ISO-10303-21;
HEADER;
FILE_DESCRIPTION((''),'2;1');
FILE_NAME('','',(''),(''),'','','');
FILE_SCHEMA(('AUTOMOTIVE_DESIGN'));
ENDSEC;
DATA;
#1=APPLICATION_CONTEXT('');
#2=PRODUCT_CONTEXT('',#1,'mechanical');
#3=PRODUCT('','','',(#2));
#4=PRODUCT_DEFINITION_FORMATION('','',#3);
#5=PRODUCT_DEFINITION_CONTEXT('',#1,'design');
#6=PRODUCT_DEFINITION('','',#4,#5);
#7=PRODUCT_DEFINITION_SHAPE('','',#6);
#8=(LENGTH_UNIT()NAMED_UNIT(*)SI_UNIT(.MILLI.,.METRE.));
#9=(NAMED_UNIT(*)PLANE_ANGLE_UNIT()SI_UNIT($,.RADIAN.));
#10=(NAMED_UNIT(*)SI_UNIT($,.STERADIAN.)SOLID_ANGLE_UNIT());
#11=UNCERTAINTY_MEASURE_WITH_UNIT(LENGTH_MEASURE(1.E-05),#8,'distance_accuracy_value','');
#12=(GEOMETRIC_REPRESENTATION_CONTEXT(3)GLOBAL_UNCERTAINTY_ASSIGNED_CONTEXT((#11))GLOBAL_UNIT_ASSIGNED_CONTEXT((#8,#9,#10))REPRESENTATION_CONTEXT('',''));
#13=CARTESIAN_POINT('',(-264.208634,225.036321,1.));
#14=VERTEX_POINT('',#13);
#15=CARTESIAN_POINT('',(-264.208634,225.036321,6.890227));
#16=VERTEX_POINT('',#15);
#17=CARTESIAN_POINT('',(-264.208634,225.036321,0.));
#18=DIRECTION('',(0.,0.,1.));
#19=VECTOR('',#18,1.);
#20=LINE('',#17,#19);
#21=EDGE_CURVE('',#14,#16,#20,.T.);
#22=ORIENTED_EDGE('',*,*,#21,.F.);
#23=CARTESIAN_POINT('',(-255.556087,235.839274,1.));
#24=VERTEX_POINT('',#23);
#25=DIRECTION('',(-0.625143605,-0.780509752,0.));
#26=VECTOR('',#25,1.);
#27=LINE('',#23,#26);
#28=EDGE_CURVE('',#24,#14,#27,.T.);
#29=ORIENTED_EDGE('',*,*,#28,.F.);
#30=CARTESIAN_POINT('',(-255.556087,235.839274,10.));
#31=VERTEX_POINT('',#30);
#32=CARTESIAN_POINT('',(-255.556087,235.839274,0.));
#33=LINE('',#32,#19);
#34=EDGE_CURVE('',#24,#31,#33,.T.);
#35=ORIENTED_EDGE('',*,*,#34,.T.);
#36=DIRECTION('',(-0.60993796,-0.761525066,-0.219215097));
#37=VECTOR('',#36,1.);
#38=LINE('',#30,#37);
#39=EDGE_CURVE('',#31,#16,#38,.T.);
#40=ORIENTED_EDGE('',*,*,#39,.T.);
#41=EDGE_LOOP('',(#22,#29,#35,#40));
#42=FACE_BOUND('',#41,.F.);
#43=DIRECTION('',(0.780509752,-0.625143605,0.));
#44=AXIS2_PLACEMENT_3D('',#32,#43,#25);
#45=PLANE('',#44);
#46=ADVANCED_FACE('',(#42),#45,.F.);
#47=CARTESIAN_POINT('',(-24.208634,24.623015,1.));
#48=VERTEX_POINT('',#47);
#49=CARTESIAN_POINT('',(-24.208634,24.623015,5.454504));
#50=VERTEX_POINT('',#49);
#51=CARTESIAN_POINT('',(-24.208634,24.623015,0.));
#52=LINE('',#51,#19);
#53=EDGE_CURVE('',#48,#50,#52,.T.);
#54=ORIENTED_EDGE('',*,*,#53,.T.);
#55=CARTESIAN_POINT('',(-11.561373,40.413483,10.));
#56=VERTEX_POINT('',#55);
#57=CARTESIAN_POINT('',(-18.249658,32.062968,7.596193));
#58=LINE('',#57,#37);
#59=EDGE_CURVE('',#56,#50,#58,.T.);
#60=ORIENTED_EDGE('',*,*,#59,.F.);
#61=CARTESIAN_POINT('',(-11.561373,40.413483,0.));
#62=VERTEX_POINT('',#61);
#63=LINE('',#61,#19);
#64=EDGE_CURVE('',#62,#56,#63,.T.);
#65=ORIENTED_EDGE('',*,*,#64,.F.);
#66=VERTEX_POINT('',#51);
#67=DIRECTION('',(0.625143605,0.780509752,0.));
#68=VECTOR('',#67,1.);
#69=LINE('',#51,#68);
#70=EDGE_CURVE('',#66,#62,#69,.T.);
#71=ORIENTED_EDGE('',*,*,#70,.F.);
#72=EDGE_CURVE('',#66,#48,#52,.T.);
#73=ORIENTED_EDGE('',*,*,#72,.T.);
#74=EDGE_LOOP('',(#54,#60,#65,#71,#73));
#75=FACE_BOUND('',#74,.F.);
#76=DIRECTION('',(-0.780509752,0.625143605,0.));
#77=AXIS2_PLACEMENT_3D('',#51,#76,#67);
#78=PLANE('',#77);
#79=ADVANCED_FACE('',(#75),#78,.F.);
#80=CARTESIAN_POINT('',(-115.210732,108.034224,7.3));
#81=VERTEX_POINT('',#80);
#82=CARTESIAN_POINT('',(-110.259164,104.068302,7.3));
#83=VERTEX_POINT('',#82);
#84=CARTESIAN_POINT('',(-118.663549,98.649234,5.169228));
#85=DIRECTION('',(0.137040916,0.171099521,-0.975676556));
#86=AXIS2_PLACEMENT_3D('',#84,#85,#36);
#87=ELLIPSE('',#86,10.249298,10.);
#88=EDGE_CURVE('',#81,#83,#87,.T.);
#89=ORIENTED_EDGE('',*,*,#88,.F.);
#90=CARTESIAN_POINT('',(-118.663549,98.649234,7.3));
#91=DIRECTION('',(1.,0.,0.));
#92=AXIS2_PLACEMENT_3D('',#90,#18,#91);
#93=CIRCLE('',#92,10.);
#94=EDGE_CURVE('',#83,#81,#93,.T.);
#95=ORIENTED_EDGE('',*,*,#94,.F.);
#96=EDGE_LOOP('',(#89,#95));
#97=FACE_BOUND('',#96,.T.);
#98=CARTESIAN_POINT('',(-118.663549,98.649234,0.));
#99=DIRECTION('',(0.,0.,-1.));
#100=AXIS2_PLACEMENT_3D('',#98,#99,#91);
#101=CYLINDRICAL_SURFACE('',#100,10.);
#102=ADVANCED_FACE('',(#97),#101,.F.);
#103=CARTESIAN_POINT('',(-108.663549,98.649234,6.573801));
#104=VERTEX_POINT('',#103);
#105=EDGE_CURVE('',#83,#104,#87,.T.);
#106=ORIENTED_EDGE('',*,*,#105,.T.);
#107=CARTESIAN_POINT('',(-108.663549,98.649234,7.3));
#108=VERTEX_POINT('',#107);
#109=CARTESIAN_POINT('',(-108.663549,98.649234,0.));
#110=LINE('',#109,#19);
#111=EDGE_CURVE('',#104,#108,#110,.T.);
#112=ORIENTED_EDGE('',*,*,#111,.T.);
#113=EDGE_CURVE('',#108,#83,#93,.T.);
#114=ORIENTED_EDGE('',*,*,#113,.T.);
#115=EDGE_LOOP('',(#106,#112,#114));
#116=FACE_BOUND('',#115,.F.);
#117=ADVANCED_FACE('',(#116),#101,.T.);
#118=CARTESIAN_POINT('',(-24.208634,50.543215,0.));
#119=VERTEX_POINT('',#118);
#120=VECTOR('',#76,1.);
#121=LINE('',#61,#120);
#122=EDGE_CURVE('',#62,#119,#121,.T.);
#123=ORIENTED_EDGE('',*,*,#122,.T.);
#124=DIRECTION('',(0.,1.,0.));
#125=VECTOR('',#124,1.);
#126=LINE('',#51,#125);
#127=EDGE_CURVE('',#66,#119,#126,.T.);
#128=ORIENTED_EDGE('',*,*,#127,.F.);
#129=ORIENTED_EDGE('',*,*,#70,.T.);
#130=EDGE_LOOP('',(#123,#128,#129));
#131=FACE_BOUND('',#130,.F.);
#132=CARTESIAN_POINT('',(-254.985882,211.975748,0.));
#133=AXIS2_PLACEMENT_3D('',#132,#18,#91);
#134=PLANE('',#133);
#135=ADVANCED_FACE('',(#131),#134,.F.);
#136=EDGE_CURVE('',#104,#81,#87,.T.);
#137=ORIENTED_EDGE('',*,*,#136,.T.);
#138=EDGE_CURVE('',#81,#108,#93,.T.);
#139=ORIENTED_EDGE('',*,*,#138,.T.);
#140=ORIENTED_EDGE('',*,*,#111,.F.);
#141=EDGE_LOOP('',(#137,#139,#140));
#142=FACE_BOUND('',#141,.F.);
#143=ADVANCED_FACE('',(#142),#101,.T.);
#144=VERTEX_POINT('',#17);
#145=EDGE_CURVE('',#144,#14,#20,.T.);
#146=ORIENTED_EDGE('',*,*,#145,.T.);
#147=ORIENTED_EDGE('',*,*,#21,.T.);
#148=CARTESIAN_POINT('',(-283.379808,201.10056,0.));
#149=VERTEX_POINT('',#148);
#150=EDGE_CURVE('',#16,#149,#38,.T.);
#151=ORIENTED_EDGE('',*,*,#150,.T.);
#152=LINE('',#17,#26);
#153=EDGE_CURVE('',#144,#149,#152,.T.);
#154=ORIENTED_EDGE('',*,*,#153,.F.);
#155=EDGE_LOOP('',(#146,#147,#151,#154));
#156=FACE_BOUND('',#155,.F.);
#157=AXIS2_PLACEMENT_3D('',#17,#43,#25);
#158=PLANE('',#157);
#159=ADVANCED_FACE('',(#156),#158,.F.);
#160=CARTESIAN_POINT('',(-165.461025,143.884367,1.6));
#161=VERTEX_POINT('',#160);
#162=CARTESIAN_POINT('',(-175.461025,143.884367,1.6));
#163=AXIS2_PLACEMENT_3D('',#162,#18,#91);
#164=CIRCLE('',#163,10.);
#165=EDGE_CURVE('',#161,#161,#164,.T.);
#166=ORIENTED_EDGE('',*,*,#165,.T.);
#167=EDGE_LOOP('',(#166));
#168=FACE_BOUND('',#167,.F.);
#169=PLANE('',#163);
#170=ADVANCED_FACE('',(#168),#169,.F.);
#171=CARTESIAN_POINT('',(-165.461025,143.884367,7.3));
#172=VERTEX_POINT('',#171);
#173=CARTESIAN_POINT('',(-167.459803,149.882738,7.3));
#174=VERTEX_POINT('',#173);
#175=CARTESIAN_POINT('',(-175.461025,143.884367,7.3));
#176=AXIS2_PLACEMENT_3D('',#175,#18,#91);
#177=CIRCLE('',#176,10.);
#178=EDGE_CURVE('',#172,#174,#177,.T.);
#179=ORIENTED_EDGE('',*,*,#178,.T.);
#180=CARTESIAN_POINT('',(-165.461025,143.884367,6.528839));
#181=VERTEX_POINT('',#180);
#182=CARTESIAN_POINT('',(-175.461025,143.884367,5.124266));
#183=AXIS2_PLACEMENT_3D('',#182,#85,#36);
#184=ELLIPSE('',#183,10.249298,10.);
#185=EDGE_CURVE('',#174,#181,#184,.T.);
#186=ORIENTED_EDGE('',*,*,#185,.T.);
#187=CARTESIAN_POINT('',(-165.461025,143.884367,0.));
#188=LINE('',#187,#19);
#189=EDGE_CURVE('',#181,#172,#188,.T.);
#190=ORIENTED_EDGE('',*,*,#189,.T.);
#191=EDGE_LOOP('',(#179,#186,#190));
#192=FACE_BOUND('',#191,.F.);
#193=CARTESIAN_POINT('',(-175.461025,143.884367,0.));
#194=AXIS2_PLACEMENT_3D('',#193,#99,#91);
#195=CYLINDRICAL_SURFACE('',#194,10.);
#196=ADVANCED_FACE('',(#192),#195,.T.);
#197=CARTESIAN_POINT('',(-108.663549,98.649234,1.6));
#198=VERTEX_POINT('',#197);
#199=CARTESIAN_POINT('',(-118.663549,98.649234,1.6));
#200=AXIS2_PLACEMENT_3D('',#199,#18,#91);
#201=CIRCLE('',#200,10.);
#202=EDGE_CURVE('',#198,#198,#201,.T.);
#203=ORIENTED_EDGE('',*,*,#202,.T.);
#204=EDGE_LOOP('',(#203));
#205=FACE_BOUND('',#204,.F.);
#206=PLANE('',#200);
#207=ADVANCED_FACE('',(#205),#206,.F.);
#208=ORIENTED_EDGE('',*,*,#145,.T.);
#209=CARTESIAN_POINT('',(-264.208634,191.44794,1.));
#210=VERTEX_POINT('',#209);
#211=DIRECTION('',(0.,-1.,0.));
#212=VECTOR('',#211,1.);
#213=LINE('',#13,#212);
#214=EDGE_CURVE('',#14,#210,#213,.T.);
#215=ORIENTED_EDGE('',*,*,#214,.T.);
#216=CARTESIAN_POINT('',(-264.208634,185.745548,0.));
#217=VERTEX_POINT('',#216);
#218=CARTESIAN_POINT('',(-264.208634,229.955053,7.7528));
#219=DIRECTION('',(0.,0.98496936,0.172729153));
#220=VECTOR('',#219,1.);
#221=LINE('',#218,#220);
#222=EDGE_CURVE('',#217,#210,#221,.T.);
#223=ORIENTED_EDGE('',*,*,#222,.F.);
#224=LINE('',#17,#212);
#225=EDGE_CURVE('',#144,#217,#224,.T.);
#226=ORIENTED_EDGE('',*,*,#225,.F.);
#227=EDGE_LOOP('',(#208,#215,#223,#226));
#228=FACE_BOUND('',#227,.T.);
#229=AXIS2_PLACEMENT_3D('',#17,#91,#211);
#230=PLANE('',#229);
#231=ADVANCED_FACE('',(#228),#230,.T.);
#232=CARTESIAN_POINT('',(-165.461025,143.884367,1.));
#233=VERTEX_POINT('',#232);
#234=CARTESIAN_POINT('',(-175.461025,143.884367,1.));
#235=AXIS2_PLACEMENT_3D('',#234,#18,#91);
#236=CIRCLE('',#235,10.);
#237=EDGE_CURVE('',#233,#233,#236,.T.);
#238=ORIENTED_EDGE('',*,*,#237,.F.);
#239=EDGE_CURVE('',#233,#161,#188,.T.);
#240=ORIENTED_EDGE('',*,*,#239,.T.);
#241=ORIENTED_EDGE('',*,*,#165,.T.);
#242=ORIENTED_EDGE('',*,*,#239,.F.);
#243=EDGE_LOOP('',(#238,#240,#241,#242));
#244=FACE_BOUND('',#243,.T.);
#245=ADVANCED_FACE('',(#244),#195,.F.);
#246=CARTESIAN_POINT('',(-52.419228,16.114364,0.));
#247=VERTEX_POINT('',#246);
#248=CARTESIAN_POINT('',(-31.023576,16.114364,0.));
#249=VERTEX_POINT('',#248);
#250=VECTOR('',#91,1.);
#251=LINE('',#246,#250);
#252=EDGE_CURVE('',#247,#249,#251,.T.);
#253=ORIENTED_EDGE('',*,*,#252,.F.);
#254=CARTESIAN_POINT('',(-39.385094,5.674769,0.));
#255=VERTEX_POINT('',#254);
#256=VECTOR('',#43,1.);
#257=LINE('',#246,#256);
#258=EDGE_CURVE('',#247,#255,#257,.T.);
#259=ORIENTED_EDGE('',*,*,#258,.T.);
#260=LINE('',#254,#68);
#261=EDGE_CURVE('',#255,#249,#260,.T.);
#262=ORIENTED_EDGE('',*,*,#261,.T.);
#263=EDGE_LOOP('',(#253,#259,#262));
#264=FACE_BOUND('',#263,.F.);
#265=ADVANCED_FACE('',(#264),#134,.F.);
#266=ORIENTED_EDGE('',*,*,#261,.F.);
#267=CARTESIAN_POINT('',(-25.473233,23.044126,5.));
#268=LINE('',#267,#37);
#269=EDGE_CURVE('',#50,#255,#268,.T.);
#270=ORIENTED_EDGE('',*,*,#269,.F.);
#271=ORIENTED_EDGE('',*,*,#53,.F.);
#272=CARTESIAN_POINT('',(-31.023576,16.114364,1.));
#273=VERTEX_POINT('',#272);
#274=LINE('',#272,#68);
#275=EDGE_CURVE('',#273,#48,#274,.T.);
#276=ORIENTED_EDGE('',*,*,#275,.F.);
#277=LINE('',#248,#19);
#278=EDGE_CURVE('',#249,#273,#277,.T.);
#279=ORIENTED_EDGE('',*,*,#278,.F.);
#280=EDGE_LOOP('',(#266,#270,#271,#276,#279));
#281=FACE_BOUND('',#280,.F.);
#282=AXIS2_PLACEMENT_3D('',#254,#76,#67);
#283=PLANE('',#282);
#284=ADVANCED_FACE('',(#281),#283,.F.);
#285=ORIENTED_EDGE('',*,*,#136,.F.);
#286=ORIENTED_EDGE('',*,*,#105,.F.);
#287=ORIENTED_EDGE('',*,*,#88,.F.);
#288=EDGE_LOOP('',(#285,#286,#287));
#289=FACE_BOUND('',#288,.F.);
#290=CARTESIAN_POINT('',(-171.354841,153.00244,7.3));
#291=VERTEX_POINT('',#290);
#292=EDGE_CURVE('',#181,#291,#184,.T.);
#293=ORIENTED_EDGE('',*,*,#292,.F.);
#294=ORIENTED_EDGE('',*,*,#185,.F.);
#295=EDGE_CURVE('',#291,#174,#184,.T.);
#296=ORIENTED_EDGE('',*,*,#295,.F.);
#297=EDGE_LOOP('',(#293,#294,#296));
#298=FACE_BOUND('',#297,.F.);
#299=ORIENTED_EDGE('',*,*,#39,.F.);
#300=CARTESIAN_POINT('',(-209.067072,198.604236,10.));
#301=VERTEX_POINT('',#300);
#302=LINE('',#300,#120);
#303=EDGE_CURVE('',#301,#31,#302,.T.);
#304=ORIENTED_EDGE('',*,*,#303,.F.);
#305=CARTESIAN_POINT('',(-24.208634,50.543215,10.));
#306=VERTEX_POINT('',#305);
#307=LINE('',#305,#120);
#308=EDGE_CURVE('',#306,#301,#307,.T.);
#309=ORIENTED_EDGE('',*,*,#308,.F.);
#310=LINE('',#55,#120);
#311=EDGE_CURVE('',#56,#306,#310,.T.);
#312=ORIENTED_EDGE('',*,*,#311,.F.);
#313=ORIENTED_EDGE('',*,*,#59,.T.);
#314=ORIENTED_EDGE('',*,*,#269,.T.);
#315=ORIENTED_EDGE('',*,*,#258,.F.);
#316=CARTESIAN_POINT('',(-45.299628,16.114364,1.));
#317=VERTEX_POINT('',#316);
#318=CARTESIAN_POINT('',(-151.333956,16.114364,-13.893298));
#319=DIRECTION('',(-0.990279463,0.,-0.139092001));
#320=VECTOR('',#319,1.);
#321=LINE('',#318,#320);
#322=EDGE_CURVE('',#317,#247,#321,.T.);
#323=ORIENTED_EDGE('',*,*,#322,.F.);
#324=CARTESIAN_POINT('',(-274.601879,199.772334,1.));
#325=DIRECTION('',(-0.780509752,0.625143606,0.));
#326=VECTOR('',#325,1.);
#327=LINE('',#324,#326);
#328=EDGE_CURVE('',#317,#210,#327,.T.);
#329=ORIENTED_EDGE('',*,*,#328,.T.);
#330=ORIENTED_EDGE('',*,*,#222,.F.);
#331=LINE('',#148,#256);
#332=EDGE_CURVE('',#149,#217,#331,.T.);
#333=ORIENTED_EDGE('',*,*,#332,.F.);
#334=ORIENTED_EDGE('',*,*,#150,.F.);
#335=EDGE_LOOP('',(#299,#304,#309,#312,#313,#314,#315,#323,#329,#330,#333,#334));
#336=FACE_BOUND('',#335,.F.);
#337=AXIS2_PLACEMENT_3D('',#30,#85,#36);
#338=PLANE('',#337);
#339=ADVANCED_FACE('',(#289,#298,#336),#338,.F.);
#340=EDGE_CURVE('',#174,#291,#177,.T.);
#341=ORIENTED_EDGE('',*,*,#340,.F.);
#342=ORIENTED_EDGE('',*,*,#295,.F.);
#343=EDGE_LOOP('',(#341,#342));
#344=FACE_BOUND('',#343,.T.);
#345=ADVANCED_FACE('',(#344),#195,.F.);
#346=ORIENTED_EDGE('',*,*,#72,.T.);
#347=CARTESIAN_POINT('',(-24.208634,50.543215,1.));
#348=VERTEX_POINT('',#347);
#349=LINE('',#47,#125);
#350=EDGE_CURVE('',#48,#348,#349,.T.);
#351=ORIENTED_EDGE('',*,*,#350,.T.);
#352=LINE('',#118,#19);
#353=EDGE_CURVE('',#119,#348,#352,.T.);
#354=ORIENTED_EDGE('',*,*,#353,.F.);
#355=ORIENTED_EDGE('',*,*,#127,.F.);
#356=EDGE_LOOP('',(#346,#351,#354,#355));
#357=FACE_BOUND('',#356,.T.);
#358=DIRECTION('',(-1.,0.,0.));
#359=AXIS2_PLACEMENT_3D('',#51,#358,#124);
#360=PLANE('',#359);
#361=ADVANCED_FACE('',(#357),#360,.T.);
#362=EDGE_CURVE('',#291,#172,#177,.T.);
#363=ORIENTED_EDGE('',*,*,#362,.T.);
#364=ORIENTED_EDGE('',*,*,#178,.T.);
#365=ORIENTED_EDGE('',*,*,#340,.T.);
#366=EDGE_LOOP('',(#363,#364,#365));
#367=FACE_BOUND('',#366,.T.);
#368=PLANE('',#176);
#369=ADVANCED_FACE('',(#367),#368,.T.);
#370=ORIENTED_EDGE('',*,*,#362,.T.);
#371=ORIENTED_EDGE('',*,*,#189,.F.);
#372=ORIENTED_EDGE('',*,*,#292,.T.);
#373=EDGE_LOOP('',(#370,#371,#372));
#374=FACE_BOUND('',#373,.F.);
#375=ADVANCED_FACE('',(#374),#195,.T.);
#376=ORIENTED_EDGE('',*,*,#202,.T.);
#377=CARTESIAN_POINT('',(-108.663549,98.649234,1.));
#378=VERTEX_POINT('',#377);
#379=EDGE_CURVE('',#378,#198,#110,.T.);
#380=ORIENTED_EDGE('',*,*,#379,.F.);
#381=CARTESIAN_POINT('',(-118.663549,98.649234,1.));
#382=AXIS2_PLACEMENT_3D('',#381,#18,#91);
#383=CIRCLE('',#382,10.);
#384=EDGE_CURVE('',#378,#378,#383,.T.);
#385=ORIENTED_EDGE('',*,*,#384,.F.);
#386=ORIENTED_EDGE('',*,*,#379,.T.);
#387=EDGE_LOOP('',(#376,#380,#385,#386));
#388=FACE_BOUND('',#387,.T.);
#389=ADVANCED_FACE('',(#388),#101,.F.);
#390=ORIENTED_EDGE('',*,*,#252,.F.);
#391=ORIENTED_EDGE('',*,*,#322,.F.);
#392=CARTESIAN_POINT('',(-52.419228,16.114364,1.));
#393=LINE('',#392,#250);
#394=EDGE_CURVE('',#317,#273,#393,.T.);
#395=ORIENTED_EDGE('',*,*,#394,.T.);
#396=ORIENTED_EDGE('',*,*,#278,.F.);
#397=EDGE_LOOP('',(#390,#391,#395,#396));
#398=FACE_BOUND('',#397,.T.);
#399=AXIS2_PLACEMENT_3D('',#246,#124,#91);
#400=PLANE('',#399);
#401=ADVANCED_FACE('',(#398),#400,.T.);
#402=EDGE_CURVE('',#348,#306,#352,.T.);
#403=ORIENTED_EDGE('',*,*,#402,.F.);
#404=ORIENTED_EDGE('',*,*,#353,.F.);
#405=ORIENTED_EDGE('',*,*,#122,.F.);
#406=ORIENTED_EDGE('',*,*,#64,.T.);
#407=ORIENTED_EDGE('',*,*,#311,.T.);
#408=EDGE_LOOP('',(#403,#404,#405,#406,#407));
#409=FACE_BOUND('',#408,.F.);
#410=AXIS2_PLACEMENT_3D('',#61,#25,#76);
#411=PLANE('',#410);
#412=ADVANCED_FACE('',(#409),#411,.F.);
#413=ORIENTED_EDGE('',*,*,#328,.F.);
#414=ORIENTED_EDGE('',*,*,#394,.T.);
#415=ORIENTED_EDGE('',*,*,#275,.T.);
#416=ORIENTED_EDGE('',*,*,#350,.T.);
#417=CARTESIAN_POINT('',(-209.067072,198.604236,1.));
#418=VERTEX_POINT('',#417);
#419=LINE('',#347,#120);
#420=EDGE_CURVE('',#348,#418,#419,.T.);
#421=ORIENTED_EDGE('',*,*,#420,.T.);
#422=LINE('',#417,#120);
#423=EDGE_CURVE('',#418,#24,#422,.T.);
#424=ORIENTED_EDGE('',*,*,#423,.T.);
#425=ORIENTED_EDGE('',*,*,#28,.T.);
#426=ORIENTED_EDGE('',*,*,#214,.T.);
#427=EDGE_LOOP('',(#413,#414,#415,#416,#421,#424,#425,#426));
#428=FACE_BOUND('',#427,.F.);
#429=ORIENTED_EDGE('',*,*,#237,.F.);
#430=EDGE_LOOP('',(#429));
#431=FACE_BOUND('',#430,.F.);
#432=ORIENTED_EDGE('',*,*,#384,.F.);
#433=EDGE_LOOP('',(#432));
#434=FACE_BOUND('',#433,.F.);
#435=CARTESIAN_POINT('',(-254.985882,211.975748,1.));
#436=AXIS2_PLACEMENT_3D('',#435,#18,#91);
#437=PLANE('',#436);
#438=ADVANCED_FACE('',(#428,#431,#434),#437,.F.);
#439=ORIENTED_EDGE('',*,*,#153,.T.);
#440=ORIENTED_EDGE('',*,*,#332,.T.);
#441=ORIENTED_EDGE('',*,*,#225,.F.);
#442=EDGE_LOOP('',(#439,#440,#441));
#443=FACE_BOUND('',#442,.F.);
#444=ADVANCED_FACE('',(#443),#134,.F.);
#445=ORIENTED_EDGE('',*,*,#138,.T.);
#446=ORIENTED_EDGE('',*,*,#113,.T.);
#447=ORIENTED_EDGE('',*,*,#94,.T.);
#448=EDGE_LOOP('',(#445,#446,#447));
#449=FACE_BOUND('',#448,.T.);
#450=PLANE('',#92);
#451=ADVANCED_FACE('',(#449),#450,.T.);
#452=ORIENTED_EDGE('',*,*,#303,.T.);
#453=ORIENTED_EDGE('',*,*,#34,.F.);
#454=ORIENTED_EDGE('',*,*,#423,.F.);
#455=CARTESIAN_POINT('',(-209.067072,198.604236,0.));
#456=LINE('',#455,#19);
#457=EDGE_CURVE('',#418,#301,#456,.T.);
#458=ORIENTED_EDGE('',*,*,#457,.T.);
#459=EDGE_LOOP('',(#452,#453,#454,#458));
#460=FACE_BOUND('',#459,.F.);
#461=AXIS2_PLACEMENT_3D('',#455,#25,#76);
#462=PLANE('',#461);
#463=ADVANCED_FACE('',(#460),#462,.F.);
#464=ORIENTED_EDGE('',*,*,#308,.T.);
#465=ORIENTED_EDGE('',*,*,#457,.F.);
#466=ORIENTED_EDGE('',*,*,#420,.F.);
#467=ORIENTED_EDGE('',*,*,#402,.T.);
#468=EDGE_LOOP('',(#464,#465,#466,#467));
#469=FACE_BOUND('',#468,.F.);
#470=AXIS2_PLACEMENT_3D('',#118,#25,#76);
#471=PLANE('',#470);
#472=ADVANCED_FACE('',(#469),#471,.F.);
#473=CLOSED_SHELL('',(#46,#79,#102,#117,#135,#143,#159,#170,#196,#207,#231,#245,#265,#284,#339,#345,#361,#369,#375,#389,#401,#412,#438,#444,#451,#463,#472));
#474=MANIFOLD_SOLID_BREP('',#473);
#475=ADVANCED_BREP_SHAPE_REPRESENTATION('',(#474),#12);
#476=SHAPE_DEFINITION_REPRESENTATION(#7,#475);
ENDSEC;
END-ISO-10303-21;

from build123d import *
from build123d import SkipClean  # not in build123d's __all__

# Parameters (mm, degrees)
F0_R     = 10
F1_DEPTH = 10
F2_DEPTH = 1
F4_DEPTH = 345
F5_DEPTH = 7.3
F6_DEPTH = 1.6


with BuildPart() as f1:
    # F0 (on Top) → F1 (new body)
    with BuildSketch(Plane.XY):
        Polygon((-255.5560874402, 235.83927431), (-264.2086340252, 225.0363213116), (-264.2086340252, 185.7455475346), (-236.384913462, 220.4842620314), align=None)
        Polygon((-264.2086340252, 185.7455475346), (-264.2086340252, 225.0363213116), (-283.3798080034, 201.1005598132), align=None)
        Polygon((-236.384913462, 220.4842620314), (-264.2086340252, 185.7455475346), (-236.8907927142, 163.8655213438), (-209.0670721511, 198.6042358405), align=None)
        Polygon((-209.0670721511, 198.6042358405), (-236.8907927142, 163.8655213438), (-108.6030207612, 61.1143640196), (-80.779300198, 95.8530785163), align=None)
        with Locations((-175.4610245732, 143.8843668861)):
            Circle(F0_R, mode=Mode.SUBTRACT)
        with Locations((-118.6635494232, 98.6492335796)):
            Circle(F0_R, mode=Mode.SUBTRACT)
        Polygon((-80.779300198, 95.8530785163), (-108.6030207612, 61.1143640196), (-52.4192279143, 16.1143640196), (-31.023575784, 16.1143640196), (-24.2086340252, 24.6230145983), (-24.2086340252, 50.5432151414), align=None)
        Polygon((-11.5613729408, 40.4134834171), (-24.2086340252, 50.5432151414), (-24.2086340252, 24.6230145983), align=None)
        Polygon((-31.023575784, 16.1143640196), (-52.4192279143, 16.1143640196), (-39.385093504, 5.6747689203), align=None)
    extrude(amount=F1_DEPTH)

    # F0 (on Top) → F2 (cut)
    with BuildSketch(Plane.XY):
        Polygon((-255.5560874402, 235.83927431), (-264.2086340252, 225.0363213116), (-264.2086340252, 185.7455475346), (-236.384913462, 220.4842620314), align=None)
        Polygon((-236.384913462, 220.4842620314), (-264.2086340252, 185.7455475346), (-236.8907927142, 163.8655213438), (-209.0670721511, 198.6042358405), align=None)
        Polygon((-209.0670721511, 198.6042358405), (-236.8907927142, 163.8655213438), (-108.6030207612, 61.1143640196), (-80.779300198, 95.8530785163), align=None)
        with Locations((-175.4610245732, 143.8843668861)):
            Circle(F0_R, mode=Mode.SUBTRACT)
        with Locations((-118.6635494232, 98.6492335796)):
            Circle(F0_R, mode=Mode.SUBTRACT)
        Polygon((-80.779300198, 95.8530785163), (-108.6030207612, 61.1143640196), (-52.4192279143, 16.1143640196), (-31.023575784, 16.1143640196), (-24.2086340252, 24.6230145983), (-24.2086340252, 50.5432151414), align=None)
    extrude(amount=F2_DEPTH, mode=Mode.SUBTRACT)

    # F3 (on face) → F4 (cut)
    with BuildSketch(Plane(origin=(-270.7568290083, 216.860711746, 0), x_dir=(-0.6251436055, -0.7805097517, 0), z_dir=(-0.7805097517, 0.6251436055, 0))):
        Polygon((20.192126873, 10), (-24.3155995446, 10), (20.192126873, 0), align=None)
        Polygon((-17.6889132261, 39.4938741719), (-24.3155995446, 10), (20.192126873, 10), (20.192126873, 0), (26.8188131915, 29.4938741719), align=None)
    extrude(amount=-F4_DEPTH, mode=Mode.SUBTRACT)

    # F0 (on Top) → F5 (join)
    with BuildSketch(Plane.XY):
        with Locations((-175.4610245732, 143.8843668861)):
            Circle(F0_R)
        with Locations((-118.6635494232, 98.6492335796)):
            Circle(F0_R)
    with SkipClean():  # cleaning this boolean's faces spoils the solid; the shape is the same uncleaned
        extrude(amount=F5_DEPTH)

    # F0 (on Top) → F6 (cut)
    with BuildSketch(Plane.XY):
        with Locations((-118.6635494232, 98.6492335796)):
            Circle(F0_R)
        with Locations((-175.4610245732, 143.8843668861)):
            Circle(F0_R)
    with SkipClean():  # cleaning this boolean's faces spoils the solid; the shape is the same uncleaned
        extrude(amount=F6_DEPTH, mode=Mode.SUBTRACT)


solid = f1.part
